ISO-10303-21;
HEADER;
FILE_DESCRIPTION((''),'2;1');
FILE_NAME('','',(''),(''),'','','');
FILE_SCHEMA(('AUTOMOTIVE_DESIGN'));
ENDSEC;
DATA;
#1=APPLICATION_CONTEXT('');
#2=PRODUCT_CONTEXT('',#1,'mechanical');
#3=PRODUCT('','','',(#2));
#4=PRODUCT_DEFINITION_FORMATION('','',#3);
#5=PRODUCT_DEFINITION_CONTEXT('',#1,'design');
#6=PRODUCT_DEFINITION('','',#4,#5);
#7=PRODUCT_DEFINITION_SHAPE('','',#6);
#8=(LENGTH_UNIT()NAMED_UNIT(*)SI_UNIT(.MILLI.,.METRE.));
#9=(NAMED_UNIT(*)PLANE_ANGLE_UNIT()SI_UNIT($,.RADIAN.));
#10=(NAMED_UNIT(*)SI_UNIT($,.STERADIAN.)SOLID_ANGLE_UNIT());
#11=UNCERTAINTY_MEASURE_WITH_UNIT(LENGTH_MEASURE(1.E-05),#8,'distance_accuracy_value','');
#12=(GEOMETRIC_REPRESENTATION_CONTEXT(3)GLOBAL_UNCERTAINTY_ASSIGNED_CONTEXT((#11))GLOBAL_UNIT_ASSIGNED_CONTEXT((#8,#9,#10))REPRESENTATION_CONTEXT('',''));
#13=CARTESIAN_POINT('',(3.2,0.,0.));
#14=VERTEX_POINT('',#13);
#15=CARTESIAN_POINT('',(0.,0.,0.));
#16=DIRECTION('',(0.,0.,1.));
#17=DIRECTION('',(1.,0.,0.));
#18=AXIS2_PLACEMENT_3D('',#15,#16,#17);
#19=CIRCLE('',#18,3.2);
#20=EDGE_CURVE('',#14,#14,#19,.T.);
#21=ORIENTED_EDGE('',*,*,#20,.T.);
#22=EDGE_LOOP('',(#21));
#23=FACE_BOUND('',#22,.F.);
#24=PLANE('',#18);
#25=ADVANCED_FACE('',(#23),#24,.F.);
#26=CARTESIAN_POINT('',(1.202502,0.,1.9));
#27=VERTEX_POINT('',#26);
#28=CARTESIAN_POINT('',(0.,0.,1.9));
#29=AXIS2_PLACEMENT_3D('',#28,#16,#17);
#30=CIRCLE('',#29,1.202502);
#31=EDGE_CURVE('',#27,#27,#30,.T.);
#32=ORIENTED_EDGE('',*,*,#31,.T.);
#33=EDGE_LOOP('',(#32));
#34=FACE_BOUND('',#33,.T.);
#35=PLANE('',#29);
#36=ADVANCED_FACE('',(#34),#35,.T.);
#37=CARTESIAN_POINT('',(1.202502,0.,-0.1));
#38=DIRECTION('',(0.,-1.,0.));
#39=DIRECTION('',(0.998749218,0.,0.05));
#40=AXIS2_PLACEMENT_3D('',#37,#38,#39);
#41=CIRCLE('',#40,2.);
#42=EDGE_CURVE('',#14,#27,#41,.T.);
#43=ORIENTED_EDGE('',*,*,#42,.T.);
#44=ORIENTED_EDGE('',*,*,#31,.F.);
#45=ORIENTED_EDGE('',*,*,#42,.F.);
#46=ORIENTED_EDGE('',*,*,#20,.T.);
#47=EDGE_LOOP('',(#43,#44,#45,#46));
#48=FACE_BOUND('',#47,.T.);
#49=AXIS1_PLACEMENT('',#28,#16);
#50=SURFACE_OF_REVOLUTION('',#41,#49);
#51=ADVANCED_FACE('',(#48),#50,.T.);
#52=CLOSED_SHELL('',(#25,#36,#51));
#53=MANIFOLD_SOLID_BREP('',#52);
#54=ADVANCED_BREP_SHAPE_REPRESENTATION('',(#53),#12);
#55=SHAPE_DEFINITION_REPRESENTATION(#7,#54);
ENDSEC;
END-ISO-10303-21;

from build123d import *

# Parameters (mm, degrees)
F0_R     = 3.2
F1_DEPTH = 1.9


# Not quite as in the source:
# - a fillet or chamfer that OpenCascade refuses, or shapes differently, is made with other operations: its cross-section is extruded or revolved along the edge and cut away or added


with BuildPart() as f1:
    # F0 (on Top) → F1 (new body)
    with BuildSketch(Plane.XY):
        Circle(F0_R)
    extrude(amount=F1_DEPTH)

    # F2: fillet of radius 2 on 1 edges, made by hand

    # F2_s1 → F2_t2 (revolve, cut)
    with BuildSketch(Plane.XZ):
        with BuildLine():
            ThreePointArc((3.2, 0), (2.5809064397, 1.3491376746), (1.2025015645, 1.9))
            Line((1.2025015645, 1.9), (3.2, 1.9))
            Line((3.2, 1.9), (3.2, 0))
        make_face()
    revolve(axis=Axis((0, 0, 1.9), (0, 0, 1)), mode=Mode.SUBTRACT)


solid = f1.part
